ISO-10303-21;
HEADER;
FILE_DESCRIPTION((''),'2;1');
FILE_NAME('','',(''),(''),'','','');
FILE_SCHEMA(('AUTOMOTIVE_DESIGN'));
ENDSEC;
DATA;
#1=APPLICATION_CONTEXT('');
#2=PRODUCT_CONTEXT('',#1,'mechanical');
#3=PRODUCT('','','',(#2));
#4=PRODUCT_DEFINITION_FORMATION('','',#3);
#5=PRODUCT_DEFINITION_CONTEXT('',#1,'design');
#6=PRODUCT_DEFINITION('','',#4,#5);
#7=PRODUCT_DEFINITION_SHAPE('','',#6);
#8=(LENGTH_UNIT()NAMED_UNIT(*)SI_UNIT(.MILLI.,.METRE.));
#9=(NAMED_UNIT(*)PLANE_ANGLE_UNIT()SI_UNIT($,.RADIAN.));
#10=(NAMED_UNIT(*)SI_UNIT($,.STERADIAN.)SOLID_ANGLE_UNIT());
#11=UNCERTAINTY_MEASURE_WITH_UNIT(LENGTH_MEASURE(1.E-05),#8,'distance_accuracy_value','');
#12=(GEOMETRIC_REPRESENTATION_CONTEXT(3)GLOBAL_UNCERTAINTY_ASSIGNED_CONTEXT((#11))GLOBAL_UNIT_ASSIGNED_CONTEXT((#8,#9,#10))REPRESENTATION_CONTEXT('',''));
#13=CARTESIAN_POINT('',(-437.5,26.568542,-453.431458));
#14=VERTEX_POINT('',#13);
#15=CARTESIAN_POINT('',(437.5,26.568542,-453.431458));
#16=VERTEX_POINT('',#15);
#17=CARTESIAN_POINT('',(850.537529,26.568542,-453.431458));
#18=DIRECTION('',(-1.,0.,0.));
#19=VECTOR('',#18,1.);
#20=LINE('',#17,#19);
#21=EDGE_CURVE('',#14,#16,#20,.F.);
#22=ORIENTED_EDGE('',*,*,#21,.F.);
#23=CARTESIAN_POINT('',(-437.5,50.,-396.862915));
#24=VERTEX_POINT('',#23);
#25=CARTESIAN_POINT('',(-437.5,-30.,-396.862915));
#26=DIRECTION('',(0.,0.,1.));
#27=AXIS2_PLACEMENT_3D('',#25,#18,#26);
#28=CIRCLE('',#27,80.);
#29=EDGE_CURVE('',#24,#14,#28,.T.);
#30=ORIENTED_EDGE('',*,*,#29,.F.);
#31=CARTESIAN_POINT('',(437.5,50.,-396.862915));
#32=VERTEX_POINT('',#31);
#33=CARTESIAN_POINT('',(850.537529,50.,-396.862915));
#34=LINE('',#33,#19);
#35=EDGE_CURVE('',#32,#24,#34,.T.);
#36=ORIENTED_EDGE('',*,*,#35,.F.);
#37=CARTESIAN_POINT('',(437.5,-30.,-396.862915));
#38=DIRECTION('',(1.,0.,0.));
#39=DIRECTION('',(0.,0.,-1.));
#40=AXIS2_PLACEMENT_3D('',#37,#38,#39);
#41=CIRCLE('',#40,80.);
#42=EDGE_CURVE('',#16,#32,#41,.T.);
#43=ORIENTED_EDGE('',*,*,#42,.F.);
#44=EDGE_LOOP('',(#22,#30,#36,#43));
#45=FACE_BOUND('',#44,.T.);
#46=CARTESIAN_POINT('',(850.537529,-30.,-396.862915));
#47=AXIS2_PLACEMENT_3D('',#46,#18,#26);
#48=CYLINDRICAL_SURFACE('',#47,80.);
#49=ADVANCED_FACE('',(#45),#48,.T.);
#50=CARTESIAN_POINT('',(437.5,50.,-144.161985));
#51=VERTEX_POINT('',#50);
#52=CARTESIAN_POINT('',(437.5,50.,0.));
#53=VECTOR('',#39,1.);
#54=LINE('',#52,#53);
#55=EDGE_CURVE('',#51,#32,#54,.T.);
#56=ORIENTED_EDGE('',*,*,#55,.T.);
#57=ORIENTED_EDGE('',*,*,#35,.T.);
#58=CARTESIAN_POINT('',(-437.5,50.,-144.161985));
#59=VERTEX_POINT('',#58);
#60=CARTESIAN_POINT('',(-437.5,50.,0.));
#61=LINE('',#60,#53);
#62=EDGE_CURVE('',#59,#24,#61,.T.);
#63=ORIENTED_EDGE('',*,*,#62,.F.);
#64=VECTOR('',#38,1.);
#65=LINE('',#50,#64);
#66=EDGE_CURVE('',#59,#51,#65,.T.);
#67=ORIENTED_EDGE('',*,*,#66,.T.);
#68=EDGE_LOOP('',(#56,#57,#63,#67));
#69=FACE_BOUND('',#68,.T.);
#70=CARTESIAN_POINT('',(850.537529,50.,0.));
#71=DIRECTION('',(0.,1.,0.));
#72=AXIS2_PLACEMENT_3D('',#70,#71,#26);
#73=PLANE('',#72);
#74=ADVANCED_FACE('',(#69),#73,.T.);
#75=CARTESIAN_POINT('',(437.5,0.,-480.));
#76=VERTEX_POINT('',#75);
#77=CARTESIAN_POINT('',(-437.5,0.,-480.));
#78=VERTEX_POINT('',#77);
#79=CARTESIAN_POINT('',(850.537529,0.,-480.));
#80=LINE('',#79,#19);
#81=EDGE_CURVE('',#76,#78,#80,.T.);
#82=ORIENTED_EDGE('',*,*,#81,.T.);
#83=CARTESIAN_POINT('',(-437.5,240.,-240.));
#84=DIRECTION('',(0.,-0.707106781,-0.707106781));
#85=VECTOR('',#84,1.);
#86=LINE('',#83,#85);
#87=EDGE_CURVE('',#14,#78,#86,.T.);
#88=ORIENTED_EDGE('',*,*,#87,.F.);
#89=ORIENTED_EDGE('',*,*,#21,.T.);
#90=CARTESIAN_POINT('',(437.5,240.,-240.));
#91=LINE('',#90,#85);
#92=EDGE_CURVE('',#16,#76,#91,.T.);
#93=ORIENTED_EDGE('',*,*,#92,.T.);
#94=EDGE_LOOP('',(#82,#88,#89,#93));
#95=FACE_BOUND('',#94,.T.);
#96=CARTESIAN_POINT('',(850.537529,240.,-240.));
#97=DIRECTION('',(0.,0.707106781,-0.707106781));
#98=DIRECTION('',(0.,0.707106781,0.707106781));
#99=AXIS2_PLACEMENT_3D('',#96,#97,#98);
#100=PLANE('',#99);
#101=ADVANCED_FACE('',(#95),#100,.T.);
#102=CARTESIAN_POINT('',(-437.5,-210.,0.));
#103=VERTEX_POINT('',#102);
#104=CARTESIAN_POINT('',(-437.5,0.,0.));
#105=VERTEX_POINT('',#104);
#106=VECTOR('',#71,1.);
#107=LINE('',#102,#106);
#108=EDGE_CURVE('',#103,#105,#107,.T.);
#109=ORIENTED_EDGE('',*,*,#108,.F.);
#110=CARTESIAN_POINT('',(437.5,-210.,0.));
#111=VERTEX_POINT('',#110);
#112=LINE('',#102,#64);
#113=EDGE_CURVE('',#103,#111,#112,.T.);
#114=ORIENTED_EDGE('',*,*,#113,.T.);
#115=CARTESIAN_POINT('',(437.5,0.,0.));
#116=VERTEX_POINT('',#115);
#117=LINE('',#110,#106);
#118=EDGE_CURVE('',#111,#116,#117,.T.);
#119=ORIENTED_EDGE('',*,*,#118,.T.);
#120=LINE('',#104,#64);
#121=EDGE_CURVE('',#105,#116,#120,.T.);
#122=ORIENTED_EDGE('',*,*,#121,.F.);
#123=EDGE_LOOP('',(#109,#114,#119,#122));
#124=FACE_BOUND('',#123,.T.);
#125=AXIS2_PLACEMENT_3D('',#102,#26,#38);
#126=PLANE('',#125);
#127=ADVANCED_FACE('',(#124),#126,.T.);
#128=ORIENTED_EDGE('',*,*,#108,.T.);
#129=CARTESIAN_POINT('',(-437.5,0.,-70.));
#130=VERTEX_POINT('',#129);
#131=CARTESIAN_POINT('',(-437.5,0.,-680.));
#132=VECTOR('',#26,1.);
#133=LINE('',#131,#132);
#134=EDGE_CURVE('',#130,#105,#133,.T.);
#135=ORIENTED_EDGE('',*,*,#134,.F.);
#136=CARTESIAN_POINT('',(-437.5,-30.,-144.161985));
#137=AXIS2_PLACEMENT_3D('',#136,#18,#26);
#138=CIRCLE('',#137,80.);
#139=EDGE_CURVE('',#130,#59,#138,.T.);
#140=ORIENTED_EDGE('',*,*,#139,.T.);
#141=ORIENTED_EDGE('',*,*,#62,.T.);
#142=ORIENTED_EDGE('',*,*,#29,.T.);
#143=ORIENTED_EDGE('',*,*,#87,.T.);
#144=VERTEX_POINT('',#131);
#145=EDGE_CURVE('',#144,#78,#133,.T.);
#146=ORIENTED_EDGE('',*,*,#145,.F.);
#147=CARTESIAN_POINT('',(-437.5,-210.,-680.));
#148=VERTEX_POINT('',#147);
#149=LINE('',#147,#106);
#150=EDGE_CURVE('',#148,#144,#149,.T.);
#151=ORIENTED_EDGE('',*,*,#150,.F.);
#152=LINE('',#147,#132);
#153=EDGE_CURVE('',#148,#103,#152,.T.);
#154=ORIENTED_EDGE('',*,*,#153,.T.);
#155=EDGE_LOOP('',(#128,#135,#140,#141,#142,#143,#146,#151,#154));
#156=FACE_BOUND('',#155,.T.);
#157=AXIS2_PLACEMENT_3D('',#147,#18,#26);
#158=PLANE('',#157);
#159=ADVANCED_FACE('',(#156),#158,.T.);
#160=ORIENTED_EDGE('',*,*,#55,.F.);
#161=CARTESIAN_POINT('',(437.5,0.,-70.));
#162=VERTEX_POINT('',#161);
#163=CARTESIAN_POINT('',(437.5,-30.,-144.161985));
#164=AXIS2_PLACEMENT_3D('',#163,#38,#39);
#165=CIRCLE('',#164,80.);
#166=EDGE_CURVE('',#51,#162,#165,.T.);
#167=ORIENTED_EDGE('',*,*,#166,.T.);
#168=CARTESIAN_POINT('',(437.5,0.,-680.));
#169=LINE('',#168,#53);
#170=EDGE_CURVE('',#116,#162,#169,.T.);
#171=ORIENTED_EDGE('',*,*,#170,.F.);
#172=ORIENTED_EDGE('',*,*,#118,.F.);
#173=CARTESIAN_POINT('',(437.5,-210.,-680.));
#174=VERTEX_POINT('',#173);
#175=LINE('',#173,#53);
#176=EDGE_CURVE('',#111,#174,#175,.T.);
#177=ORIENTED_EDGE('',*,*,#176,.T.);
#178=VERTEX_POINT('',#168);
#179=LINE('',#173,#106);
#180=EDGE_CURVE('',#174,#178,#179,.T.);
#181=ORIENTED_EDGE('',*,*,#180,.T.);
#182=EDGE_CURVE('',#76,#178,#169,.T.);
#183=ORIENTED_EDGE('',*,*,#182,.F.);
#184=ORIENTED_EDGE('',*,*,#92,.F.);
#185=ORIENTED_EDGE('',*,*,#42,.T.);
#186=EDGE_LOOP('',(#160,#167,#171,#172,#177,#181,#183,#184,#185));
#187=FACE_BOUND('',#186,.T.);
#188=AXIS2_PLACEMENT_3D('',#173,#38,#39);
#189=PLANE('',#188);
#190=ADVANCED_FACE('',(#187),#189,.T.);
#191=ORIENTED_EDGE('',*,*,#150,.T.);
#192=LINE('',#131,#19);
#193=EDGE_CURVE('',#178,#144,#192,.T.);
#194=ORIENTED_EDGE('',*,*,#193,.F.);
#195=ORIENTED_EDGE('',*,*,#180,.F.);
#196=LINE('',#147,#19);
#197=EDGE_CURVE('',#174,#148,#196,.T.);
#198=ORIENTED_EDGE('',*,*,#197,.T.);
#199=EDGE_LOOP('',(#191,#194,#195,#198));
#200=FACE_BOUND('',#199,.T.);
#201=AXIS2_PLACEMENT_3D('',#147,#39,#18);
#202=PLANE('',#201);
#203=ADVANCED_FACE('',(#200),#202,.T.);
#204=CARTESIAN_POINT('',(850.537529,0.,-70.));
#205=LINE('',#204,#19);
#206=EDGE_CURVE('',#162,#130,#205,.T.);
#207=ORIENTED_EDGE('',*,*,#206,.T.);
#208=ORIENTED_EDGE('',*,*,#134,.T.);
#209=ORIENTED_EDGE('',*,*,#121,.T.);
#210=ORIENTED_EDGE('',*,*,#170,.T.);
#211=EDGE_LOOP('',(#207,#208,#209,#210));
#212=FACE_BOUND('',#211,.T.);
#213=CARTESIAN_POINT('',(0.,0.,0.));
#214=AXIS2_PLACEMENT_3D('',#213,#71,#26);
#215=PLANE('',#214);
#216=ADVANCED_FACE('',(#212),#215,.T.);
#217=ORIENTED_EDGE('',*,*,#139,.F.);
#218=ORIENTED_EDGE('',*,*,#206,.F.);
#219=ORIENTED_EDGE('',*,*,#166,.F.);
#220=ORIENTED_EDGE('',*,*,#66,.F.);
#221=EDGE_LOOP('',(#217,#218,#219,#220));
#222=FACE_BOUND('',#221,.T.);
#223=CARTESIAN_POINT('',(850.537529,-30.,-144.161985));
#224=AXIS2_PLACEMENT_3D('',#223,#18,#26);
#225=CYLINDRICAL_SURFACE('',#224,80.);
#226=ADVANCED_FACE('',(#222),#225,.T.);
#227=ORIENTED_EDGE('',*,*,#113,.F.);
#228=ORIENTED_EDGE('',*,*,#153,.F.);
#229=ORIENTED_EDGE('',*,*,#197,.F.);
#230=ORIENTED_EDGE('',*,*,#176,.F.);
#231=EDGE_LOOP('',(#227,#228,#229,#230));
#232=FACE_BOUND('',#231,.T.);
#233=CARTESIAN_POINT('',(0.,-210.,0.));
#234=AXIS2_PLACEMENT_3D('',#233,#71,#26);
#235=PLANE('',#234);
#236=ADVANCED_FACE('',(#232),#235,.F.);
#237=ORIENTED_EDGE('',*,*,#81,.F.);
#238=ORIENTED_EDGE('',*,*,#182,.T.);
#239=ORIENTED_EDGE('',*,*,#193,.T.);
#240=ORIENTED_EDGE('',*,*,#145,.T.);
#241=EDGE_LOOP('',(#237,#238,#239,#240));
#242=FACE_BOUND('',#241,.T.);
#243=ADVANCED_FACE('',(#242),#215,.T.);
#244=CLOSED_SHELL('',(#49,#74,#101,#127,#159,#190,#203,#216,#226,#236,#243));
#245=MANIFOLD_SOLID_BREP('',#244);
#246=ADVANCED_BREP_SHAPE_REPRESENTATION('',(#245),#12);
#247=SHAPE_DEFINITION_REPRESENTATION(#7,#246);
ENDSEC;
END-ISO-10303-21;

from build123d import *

# Parameters (mm, degrees)
SKETCH1_W           = 875
SKETCH1_H           = 680
BOSS_EXTRUDE1_DEPTH = 210
BOSS_EXTRUDE2_DEPTH = 875
FILLET1_R           = 80


with BuildPart() as part:
    # Sketch1 → Boss-Extrude1 (new body)
    with BuildSketch(Plane(origin=(0, 0, 0), x_dir=(1, 0, 0), z_dir=(0, 1, 0))):
        with Locations((0, 340)):
            Rectangle(SKETCH1_W, SKETCH1_H)
    extrude(amount=-BOSS_EXTRUDE1_DEPTH)

    # Sketch3 → Boss-Extrude2 (add)
    with BuildSketch(Plane.ZY.offset(437.5)):
        Polygon((-70, 0), (-70, 50), (-430, 50), (-480, 0), align=None)
    extrude(amount=-BOSS_EXTRUDE2_DEPTH)

    # Fillet1
    # the kernel refuses this fillet: 80 mm, written as the material it takes off along each edge
    with BuildSketch(Plane(origin=(-622.904962177, 50, -70), x_dir=(0, -1, 0), z_dir=(1, 0, 0))) as fillet1_piece_1:
        with BuildLine():
            CenterArc((80, 74.161984871), FILLET1_R, 180, 67.975687163)
            Line((0, 74.161984871), (-1.6, 74.161984871))
            Line((-1.6, 74.161984871), (-1.6, 0))
            Line((-1.6, 0), (0, -1.6))
            ThreePointArc((0, -1.6), (25, -1.6), (49.4, -1.483239697))
            Line((49.4, -1.483239697), (50, 0))
        make_face()
    extrude(amount=1245.809924355, mode=Mode.SUBTRACT)
    with BuildSketch(Plane(origin=(-520.342712475, 50, -430), x_dir=(0, -0.7071067811865477, -0.7071067811865474), z_dir=(1, 0, 0))) as fillet1_piece_2:
        with BuildLine():
            CenterArc((FILLET1_R * 0.414213562373, -FILLET1_R), FILLET1_R, 90, 45)
            Line((-FILLET1_R * 0.292893218813, -FILLET1_R * 0.292893218813), (-FILLET1_R * 0.307035354437, -FILLET1_R * 0.27875108319))
            Line((-FILLET1_R * 0.307035354437, -FILLET1_R * 0.27875108319), (-FILLET1_R * 0.00828427124746, FILLET1_R * 0.02))
            Line((-FILLET1_R * 0.00828427124746, FILLET1_R * 0.02), (FILLET1_R * 0.414213562373, FILLET1_R * 0.02))
            Line((FILLET1_R * 0.414213562373, FILLET1_R * 0.02), (FILLET1_R * 0.414213562373, 0))
        make_face()
    extrude(amount=1040.685424949, mode=Mode.SUBTRACT)


solid = part.part
